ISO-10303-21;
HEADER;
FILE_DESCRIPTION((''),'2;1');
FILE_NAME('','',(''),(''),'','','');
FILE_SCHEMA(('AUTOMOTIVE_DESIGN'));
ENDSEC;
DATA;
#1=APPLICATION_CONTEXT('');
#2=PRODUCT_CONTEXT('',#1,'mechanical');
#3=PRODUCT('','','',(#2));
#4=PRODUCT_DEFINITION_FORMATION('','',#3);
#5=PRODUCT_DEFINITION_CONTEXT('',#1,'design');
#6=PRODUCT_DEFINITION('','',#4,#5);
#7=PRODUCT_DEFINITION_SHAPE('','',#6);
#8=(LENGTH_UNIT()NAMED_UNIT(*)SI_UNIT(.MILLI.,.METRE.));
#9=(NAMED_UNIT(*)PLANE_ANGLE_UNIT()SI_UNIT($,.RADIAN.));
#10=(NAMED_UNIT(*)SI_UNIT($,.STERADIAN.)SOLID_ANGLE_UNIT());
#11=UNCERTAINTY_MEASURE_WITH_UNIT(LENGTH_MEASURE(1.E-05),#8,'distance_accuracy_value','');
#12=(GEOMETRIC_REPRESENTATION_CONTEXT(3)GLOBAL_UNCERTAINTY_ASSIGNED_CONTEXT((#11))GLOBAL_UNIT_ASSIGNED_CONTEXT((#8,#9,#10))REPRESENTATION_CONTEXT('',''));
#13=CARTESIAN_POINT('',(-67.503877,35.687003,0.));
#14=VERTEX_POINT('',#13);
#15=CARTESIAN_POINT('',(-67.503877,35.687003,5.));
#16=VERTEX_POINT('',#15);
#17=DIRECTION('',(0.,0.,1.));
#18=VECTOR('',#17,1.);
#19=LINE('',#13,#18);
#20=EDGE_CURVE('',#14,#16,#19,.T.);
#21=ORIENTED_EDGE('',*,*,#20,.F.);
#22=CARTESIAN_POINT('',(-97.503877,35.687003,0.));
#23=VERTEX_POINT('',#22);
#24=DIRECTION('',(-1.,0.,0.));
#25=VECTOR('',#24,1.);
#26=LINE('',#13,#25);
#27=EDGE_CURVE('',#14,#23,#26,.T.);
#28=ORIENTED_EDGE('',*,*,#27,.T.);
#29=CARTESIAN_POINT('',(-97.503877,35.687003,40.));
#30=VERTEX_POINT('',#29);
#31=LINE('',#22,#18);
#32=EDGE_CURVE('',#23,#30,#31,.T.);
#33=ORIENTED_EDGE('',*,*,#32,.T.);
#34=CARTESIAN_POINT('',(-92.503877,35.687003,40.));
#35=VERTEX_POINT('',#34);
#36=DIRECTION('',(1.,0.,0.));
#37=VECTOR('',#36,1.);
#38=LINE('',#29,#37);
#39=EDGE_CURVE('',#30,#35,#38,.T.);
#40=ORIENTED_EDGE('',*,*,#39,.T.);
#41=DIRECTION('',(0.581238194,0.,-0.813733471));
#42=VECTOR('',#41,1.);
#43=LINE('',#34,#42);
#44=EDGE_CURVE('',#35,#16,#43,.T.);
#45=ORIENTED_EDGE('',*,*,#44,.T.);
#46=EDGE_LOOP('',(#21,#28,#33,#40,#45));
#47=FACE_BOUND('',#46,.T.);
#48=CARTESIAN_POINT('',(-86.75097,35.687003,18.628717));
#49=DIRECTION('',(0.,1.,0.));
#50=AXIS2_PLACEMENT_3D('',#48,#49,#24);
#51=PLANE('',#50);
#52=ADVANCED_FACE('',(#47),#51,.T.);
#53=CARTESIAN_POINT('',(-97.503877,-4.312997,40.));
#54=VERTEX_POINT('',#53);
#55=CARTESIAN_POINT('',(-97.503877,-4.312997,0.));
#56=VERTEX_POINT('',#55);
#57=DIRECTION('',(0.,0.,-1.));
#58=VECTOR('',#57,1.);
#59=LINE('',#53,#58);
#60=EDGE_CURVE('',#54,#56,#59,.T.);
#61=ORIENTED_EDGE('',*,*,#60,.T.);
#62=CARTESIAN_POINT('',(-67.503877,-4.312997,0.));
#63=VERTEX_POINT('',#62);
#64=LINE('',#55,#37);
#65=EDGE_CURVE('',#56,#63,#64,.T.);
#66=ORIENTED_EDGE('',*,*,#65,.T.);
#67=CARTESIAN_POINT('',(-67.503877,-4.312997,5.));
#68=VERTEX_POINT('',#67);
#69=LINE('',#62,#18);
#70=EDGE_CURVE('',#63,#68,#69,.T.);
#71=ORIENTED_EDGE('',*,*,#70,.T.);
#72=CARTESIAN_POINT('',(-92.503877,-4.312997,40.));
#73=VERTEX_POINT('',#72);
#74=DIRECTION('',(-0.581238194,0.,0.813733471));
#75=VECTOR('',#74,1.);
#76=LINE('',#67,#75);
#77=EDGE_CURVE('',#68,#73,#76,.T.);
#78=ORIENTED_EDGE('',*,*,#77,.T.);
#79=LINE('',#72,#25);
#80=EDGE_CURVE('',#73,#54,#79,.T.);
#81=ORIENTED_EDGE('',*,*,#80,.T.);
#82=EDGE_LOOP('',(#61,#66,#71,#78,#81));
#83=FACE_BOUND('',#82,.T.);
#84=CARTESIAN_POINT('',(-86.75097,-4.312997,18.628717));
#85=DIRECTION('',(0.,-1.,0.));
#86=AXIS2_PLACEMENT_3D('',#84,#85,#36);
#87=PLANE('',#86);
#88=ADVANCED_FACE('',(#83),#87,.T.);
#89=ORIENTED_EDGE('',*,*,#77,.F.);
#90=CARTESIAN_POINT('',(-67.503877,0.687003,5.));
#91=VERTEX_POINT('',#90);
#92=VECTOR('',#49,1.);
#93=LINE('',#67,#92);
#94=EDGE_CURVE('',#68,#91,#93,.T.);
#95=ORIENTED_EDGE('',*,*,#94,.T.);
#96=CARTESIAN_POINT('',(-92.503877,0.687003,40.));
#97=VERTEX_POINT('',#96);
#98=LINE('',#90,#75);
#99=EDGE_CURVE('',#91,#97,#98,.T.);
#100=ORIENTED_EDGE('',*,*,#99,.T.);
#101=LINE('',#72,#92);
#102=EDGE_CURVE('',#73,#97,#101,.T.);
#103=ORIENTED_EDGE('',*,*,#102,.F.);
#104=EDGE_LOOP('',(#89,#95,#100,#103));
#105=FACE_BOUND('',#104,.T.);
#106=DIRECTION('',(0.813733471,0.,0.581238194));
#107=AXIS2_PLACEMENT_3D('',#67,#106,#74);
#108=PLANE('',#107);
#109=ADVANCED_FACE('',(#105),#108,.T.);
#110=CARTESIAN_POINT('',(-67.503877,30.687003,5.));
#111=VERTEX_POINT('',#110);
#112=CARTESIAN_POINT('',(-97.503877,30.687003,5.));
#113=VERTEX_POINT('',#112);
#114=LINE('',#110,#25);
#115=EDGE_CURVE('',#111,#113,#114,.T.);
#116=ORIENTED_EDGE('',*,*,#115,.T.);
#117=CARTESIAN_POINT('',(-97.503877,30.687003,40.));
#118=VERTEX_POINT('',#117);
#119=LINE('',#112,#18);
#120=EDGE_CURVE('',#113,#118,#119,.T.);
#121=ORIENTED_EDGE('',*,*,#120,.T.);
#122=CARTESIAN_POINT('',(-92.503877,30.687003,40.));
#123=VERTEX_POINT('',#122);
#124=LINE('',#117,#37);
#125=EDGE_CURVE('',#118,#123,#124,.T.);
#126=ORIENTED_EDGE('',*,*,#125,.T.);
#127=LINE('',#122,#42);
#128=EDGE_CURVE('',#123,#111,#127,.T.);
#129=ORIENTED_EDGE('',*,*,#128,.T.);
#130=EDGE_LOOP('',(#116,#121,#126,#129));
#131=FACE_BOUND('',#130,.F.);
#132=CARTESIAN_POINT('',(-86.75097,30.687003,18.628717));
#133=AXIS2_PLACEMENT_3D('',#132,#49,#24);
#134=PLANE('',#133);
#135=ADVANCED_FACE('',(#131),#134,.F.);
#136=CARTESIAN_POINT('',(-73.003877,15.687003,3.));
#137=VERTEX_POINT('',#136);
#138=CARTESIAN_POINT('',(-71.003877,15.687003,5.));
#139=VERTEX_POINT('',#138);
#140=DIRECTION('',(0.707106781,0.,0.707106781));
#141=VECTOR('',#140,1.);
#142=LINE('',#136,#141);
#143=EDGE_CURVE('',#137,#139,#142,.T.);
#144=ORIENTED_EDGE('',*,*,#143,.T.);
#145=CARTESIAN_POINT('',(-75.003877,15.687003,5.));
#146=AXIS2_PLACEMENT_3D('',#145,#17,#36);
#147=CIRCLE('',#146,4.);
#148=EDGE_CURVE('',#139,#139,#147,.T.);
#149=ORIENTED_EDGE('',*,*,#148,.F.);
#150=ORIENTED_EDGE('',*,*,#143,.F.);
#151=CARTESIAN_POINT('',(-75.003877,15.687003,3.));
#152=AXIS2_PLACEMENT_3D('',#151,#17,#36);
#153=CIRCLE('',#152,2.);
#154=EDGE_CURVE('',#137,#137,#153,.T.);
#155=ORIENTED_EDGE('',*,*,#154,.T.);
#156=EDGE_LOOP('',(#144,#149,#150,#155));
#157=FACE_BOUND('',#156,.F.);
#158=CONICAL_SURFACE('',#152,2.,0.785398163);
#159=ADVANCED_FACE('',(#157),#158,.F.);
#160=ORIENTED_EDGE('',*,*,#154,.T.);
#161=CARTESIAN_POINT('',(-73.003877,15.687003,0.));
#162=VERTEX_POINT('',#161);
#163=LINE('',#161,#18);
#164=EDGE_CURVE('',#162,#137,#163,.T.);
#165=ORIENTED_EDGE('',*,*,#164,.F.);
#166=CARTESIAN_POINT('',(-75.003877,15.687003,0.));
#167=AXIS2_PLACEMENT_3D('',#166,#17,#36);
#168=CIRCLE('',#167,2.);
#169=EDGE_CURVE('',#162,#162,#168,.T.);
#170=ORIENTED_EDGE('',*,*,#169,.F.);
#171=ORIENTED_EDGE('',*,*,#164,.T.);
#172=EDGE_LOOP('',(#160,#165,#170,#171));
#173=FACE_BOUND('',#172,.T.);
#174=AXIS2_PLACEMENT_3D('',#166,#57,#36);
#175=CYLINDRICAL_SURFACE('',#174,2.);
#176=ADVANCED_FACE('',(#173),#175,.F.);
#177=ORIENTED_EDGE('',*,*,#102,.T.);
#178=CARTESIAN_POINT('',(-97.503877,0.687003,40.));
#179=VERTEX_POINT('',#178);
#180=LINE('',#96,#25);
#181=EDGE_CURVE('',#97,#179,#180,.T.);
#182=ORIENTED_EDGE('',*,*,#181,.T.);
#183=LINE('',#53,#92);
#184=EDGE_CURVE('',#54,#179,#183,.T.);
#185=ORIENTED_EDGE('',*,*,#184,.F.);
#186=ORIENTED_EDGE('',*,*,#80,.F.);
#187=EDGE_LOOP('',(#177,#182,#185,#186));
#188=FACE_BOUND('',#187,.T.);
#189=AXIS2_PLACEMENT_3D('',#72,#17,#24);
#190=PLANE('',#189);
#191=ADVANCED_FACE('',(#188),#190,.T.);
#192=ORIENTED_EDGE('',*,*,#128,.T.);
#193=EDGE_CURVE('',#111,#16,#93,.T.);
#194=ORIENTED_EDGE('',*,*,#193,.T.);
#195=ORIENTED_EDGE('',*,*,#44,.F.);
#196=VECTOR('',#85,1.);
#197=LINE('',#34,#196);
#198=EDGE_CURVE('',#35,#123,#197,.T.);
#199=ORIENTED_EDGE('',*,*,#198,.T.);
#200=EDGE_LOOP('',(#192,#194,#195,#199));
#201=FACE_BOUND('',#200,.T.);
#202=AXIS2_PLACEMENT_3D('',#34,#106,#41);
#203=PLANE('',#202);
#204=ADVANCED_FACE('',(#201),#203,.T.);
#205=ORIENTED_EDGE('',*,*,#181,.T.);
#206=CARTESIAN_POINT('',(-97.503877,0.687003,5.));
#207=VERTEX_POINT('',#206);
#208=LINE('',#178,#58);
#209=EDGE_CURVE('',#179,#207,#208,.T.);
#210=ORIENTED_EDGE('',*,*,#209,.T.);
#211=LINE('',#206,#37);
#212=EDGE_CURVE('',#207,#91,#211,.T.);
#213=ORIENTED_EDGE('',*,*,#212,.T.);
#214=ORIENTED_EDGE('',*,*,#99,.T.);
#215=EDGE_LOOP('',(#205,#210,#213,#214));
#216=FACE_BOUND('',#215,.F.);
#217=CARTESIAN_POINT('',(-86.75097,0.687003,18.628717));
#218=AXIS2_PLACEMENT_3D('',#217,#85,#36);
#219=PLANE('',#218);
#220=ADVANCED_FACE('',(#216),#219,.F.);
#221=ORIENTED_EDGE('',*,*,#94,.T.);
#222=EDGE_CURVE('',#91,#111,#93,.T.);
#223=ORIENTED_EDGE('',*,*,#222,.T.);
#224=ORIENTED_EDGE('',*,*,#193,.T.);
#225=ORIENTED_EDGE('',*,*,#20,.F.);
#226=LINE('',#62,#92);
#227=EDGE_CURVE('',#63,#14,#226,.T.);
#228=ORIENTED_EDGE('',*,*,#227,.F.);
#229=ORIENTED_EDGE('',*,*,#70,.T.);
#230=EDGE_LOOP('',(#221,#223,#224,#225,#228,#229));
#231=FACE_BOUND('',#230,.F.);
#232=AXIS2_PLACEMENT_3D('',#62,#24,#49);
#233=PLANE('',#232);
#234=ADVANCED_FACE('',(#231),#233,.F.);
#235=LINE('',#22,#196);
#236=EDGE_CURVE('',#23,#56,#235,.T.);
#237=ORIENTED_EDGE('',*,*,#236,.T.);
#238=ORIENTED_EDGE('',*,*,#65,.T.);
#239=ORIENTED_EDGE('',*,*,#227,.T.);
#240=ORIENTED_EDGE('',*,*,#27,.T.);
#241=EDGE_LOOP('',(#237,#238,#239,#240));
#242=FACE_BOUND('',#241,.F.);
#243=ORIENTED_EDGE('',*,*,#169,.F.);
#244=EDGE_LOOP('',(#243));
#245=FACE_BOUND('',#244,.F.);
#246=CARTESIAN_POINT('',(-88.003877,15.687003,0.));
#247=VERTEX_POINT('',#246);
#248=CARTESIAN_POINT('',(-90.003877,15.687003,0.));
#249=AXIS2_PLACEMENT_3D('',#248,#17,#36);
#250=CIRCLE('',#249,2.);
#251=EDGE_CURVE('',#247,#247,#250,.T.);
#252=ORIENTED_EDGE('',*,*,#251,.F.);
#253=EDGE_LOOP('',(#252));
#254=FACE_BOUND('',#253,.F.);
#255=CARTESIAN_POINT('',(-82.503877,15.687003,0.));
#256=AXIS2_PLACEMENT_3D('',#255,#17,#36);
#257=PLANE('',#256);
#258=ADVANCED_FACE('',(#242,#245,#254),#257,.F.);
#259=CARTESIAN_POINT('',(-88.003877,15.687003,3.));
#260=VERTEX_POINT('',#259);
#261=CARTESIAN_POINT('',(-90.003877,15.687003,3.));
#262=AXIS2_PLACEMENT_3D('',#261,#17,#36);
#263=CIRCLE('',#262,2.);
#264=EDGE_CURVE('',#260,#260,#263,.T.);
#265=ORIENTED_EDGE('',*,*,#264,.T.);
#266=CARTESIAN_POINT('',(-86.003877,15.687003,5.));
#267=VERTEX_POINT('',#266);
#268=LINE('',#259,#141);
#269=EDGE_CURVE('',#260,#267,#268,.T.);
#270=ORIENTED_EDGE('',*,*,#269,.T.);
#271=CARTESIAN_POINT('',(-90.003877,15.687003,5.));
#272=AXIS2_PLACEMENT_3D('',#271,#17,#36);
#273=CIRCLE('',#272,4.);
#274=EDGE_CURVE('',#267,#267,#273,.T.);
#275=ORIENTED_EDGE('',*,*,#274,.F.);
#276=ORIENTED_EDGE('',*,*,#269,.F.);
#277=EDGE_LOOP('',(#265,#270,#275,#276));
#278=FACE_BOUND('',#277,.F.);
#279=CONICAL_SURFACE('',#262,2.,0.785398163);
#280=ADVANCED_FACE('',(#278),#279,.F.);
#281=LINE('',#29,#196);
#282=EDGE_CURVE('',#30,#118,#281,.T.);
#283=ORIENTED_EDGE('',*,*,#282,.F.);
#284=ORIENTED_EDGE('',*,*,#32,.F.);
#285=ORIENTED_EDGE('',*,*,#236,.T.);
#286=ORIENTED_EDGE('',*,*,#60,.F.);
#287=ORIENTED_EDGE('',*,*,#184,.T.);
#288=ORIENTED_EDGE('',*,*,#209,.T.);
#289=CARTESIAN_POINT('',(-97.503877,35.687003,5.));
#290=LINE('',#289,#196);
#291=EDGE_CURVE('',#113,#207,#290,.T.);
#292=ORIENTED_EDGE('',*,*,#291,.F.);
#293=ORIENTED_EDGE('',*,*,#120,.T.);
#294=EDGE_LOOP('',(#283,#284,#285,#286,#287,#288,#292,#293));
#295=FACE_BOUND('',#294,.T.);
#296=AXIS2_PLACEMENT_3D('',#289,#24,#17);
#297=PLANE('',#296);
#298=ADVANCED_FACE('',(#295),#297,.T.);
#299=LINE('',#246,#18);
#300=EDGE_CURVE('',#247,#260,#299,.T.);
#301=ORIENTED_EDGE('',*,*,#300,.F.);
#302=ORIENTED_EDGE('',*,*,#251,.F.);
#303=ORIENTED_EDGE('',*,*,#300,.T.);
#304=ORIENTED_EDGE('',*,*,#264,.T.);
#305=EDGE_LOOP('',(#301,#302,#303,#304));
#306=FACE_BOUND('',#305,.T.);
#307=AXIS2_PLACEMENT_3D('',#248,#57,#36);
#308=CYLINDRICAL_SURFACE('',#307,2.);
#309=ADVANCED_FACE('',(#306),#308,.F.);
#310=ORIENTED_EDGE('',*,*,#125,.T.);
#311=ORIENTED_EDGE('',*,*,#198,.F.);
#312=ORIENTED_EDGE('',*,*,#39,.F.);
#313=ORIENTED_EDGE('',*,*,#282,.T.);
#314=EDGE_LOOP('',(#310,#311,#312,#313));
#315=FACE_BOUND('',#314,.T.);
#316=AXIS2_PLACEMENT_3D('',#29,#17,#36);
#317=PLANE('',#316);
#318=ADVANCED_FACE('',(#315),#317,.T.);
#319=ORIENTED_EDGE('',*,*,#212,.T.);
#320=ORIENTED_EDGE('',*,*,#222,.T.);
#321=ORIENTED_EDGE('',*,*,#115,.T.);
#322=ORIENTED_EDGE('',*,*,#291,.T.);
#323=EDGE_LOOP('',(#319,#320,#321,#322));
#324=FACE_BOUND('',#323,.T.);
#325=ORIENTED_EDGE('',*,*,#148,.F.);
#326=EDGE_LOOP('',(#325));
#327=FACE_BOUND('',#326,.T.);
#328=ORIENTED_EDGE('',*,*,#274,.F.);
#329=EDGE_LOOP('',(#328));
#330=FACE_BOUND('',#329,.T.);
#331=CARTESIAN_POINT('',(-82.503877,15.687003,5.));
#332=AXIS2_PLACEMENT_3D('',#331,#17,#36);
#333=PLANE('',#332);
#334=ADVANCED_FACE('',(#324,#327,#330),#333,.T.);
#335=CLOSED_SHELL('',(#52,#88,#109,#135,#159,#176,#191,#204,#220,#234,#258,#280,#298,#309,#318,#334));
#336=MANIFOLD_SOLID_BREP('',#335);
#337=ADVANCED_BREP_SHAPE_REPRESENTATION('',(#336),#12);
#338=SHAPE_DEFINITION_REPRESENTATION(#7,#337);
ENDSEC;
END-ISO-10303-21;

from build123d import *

# Parameters (mm, degrees)
F0_R     = 2
F1_DEPTH = 5
F3_DEPTH = 5
F5_DEPTH = 5
F6_SIZE  = 2


# Not quite as in the source:
# - a feature names something its author has since deleted; it is built from what else it names


with BuildPart() as f1:
    # F0 (on Top) → F1 (new body)
    with BuildSketch(Plane.XY):
        Polygon((-67.5038768748, 35.6870033689), (-97.5038768748, 35.6870033689), (-97.5038768748, 30.6870033689), (-97.5038768748, 0.6870033689), (-97.5038768748, -4.3129966311), (-67.5038768748, -4.3129966311), align=None)
        with Locations((-90.0038768748, 15.6870033689)):
            Circle(F0_R, mode=Mode.SUBTRACT)
        with Locations((-75.0038768748, 15.6870033689)):
            Circle(F0_R, mode=Mode.SUBTRACT)
    extrude(amount=F1_DEPTH)

    # F2 (on face) → F3 (join)
    with BuildSketch(Plane.XZ.offset(4.3129966311)):
        Polygon((-97.5038768748, 5), (-67.5038768748, 5), (-92.5038768748, 40), (-97.5038768748, 40), align=None)
    extrude(amount=-F3_DEPTH)

    # F4 (on face) → F5 (join)
    with BuildSketch(Plane(origin=(0, 35.6870033689, 0), x_dir=(-1, 0, 0), z_dir=(0, 1, 0))):
        Polygon((92.5038768748, 40), (67.5038768748, 5), (97.5038768748, 5), (97.5038768748, 40), align=None)
    extrude(amount=-F5_DEPTH)

    # F6
    f6_edges = [f1.edges().sort_by_distance(p)[0] for p in [
        (-77.003877, 15.687003, 5),
        (-92.003877, 15.687003, 5),
    ]]
    chamfer(f6_edges, length=F6_SIZE)


solid = f1.part
